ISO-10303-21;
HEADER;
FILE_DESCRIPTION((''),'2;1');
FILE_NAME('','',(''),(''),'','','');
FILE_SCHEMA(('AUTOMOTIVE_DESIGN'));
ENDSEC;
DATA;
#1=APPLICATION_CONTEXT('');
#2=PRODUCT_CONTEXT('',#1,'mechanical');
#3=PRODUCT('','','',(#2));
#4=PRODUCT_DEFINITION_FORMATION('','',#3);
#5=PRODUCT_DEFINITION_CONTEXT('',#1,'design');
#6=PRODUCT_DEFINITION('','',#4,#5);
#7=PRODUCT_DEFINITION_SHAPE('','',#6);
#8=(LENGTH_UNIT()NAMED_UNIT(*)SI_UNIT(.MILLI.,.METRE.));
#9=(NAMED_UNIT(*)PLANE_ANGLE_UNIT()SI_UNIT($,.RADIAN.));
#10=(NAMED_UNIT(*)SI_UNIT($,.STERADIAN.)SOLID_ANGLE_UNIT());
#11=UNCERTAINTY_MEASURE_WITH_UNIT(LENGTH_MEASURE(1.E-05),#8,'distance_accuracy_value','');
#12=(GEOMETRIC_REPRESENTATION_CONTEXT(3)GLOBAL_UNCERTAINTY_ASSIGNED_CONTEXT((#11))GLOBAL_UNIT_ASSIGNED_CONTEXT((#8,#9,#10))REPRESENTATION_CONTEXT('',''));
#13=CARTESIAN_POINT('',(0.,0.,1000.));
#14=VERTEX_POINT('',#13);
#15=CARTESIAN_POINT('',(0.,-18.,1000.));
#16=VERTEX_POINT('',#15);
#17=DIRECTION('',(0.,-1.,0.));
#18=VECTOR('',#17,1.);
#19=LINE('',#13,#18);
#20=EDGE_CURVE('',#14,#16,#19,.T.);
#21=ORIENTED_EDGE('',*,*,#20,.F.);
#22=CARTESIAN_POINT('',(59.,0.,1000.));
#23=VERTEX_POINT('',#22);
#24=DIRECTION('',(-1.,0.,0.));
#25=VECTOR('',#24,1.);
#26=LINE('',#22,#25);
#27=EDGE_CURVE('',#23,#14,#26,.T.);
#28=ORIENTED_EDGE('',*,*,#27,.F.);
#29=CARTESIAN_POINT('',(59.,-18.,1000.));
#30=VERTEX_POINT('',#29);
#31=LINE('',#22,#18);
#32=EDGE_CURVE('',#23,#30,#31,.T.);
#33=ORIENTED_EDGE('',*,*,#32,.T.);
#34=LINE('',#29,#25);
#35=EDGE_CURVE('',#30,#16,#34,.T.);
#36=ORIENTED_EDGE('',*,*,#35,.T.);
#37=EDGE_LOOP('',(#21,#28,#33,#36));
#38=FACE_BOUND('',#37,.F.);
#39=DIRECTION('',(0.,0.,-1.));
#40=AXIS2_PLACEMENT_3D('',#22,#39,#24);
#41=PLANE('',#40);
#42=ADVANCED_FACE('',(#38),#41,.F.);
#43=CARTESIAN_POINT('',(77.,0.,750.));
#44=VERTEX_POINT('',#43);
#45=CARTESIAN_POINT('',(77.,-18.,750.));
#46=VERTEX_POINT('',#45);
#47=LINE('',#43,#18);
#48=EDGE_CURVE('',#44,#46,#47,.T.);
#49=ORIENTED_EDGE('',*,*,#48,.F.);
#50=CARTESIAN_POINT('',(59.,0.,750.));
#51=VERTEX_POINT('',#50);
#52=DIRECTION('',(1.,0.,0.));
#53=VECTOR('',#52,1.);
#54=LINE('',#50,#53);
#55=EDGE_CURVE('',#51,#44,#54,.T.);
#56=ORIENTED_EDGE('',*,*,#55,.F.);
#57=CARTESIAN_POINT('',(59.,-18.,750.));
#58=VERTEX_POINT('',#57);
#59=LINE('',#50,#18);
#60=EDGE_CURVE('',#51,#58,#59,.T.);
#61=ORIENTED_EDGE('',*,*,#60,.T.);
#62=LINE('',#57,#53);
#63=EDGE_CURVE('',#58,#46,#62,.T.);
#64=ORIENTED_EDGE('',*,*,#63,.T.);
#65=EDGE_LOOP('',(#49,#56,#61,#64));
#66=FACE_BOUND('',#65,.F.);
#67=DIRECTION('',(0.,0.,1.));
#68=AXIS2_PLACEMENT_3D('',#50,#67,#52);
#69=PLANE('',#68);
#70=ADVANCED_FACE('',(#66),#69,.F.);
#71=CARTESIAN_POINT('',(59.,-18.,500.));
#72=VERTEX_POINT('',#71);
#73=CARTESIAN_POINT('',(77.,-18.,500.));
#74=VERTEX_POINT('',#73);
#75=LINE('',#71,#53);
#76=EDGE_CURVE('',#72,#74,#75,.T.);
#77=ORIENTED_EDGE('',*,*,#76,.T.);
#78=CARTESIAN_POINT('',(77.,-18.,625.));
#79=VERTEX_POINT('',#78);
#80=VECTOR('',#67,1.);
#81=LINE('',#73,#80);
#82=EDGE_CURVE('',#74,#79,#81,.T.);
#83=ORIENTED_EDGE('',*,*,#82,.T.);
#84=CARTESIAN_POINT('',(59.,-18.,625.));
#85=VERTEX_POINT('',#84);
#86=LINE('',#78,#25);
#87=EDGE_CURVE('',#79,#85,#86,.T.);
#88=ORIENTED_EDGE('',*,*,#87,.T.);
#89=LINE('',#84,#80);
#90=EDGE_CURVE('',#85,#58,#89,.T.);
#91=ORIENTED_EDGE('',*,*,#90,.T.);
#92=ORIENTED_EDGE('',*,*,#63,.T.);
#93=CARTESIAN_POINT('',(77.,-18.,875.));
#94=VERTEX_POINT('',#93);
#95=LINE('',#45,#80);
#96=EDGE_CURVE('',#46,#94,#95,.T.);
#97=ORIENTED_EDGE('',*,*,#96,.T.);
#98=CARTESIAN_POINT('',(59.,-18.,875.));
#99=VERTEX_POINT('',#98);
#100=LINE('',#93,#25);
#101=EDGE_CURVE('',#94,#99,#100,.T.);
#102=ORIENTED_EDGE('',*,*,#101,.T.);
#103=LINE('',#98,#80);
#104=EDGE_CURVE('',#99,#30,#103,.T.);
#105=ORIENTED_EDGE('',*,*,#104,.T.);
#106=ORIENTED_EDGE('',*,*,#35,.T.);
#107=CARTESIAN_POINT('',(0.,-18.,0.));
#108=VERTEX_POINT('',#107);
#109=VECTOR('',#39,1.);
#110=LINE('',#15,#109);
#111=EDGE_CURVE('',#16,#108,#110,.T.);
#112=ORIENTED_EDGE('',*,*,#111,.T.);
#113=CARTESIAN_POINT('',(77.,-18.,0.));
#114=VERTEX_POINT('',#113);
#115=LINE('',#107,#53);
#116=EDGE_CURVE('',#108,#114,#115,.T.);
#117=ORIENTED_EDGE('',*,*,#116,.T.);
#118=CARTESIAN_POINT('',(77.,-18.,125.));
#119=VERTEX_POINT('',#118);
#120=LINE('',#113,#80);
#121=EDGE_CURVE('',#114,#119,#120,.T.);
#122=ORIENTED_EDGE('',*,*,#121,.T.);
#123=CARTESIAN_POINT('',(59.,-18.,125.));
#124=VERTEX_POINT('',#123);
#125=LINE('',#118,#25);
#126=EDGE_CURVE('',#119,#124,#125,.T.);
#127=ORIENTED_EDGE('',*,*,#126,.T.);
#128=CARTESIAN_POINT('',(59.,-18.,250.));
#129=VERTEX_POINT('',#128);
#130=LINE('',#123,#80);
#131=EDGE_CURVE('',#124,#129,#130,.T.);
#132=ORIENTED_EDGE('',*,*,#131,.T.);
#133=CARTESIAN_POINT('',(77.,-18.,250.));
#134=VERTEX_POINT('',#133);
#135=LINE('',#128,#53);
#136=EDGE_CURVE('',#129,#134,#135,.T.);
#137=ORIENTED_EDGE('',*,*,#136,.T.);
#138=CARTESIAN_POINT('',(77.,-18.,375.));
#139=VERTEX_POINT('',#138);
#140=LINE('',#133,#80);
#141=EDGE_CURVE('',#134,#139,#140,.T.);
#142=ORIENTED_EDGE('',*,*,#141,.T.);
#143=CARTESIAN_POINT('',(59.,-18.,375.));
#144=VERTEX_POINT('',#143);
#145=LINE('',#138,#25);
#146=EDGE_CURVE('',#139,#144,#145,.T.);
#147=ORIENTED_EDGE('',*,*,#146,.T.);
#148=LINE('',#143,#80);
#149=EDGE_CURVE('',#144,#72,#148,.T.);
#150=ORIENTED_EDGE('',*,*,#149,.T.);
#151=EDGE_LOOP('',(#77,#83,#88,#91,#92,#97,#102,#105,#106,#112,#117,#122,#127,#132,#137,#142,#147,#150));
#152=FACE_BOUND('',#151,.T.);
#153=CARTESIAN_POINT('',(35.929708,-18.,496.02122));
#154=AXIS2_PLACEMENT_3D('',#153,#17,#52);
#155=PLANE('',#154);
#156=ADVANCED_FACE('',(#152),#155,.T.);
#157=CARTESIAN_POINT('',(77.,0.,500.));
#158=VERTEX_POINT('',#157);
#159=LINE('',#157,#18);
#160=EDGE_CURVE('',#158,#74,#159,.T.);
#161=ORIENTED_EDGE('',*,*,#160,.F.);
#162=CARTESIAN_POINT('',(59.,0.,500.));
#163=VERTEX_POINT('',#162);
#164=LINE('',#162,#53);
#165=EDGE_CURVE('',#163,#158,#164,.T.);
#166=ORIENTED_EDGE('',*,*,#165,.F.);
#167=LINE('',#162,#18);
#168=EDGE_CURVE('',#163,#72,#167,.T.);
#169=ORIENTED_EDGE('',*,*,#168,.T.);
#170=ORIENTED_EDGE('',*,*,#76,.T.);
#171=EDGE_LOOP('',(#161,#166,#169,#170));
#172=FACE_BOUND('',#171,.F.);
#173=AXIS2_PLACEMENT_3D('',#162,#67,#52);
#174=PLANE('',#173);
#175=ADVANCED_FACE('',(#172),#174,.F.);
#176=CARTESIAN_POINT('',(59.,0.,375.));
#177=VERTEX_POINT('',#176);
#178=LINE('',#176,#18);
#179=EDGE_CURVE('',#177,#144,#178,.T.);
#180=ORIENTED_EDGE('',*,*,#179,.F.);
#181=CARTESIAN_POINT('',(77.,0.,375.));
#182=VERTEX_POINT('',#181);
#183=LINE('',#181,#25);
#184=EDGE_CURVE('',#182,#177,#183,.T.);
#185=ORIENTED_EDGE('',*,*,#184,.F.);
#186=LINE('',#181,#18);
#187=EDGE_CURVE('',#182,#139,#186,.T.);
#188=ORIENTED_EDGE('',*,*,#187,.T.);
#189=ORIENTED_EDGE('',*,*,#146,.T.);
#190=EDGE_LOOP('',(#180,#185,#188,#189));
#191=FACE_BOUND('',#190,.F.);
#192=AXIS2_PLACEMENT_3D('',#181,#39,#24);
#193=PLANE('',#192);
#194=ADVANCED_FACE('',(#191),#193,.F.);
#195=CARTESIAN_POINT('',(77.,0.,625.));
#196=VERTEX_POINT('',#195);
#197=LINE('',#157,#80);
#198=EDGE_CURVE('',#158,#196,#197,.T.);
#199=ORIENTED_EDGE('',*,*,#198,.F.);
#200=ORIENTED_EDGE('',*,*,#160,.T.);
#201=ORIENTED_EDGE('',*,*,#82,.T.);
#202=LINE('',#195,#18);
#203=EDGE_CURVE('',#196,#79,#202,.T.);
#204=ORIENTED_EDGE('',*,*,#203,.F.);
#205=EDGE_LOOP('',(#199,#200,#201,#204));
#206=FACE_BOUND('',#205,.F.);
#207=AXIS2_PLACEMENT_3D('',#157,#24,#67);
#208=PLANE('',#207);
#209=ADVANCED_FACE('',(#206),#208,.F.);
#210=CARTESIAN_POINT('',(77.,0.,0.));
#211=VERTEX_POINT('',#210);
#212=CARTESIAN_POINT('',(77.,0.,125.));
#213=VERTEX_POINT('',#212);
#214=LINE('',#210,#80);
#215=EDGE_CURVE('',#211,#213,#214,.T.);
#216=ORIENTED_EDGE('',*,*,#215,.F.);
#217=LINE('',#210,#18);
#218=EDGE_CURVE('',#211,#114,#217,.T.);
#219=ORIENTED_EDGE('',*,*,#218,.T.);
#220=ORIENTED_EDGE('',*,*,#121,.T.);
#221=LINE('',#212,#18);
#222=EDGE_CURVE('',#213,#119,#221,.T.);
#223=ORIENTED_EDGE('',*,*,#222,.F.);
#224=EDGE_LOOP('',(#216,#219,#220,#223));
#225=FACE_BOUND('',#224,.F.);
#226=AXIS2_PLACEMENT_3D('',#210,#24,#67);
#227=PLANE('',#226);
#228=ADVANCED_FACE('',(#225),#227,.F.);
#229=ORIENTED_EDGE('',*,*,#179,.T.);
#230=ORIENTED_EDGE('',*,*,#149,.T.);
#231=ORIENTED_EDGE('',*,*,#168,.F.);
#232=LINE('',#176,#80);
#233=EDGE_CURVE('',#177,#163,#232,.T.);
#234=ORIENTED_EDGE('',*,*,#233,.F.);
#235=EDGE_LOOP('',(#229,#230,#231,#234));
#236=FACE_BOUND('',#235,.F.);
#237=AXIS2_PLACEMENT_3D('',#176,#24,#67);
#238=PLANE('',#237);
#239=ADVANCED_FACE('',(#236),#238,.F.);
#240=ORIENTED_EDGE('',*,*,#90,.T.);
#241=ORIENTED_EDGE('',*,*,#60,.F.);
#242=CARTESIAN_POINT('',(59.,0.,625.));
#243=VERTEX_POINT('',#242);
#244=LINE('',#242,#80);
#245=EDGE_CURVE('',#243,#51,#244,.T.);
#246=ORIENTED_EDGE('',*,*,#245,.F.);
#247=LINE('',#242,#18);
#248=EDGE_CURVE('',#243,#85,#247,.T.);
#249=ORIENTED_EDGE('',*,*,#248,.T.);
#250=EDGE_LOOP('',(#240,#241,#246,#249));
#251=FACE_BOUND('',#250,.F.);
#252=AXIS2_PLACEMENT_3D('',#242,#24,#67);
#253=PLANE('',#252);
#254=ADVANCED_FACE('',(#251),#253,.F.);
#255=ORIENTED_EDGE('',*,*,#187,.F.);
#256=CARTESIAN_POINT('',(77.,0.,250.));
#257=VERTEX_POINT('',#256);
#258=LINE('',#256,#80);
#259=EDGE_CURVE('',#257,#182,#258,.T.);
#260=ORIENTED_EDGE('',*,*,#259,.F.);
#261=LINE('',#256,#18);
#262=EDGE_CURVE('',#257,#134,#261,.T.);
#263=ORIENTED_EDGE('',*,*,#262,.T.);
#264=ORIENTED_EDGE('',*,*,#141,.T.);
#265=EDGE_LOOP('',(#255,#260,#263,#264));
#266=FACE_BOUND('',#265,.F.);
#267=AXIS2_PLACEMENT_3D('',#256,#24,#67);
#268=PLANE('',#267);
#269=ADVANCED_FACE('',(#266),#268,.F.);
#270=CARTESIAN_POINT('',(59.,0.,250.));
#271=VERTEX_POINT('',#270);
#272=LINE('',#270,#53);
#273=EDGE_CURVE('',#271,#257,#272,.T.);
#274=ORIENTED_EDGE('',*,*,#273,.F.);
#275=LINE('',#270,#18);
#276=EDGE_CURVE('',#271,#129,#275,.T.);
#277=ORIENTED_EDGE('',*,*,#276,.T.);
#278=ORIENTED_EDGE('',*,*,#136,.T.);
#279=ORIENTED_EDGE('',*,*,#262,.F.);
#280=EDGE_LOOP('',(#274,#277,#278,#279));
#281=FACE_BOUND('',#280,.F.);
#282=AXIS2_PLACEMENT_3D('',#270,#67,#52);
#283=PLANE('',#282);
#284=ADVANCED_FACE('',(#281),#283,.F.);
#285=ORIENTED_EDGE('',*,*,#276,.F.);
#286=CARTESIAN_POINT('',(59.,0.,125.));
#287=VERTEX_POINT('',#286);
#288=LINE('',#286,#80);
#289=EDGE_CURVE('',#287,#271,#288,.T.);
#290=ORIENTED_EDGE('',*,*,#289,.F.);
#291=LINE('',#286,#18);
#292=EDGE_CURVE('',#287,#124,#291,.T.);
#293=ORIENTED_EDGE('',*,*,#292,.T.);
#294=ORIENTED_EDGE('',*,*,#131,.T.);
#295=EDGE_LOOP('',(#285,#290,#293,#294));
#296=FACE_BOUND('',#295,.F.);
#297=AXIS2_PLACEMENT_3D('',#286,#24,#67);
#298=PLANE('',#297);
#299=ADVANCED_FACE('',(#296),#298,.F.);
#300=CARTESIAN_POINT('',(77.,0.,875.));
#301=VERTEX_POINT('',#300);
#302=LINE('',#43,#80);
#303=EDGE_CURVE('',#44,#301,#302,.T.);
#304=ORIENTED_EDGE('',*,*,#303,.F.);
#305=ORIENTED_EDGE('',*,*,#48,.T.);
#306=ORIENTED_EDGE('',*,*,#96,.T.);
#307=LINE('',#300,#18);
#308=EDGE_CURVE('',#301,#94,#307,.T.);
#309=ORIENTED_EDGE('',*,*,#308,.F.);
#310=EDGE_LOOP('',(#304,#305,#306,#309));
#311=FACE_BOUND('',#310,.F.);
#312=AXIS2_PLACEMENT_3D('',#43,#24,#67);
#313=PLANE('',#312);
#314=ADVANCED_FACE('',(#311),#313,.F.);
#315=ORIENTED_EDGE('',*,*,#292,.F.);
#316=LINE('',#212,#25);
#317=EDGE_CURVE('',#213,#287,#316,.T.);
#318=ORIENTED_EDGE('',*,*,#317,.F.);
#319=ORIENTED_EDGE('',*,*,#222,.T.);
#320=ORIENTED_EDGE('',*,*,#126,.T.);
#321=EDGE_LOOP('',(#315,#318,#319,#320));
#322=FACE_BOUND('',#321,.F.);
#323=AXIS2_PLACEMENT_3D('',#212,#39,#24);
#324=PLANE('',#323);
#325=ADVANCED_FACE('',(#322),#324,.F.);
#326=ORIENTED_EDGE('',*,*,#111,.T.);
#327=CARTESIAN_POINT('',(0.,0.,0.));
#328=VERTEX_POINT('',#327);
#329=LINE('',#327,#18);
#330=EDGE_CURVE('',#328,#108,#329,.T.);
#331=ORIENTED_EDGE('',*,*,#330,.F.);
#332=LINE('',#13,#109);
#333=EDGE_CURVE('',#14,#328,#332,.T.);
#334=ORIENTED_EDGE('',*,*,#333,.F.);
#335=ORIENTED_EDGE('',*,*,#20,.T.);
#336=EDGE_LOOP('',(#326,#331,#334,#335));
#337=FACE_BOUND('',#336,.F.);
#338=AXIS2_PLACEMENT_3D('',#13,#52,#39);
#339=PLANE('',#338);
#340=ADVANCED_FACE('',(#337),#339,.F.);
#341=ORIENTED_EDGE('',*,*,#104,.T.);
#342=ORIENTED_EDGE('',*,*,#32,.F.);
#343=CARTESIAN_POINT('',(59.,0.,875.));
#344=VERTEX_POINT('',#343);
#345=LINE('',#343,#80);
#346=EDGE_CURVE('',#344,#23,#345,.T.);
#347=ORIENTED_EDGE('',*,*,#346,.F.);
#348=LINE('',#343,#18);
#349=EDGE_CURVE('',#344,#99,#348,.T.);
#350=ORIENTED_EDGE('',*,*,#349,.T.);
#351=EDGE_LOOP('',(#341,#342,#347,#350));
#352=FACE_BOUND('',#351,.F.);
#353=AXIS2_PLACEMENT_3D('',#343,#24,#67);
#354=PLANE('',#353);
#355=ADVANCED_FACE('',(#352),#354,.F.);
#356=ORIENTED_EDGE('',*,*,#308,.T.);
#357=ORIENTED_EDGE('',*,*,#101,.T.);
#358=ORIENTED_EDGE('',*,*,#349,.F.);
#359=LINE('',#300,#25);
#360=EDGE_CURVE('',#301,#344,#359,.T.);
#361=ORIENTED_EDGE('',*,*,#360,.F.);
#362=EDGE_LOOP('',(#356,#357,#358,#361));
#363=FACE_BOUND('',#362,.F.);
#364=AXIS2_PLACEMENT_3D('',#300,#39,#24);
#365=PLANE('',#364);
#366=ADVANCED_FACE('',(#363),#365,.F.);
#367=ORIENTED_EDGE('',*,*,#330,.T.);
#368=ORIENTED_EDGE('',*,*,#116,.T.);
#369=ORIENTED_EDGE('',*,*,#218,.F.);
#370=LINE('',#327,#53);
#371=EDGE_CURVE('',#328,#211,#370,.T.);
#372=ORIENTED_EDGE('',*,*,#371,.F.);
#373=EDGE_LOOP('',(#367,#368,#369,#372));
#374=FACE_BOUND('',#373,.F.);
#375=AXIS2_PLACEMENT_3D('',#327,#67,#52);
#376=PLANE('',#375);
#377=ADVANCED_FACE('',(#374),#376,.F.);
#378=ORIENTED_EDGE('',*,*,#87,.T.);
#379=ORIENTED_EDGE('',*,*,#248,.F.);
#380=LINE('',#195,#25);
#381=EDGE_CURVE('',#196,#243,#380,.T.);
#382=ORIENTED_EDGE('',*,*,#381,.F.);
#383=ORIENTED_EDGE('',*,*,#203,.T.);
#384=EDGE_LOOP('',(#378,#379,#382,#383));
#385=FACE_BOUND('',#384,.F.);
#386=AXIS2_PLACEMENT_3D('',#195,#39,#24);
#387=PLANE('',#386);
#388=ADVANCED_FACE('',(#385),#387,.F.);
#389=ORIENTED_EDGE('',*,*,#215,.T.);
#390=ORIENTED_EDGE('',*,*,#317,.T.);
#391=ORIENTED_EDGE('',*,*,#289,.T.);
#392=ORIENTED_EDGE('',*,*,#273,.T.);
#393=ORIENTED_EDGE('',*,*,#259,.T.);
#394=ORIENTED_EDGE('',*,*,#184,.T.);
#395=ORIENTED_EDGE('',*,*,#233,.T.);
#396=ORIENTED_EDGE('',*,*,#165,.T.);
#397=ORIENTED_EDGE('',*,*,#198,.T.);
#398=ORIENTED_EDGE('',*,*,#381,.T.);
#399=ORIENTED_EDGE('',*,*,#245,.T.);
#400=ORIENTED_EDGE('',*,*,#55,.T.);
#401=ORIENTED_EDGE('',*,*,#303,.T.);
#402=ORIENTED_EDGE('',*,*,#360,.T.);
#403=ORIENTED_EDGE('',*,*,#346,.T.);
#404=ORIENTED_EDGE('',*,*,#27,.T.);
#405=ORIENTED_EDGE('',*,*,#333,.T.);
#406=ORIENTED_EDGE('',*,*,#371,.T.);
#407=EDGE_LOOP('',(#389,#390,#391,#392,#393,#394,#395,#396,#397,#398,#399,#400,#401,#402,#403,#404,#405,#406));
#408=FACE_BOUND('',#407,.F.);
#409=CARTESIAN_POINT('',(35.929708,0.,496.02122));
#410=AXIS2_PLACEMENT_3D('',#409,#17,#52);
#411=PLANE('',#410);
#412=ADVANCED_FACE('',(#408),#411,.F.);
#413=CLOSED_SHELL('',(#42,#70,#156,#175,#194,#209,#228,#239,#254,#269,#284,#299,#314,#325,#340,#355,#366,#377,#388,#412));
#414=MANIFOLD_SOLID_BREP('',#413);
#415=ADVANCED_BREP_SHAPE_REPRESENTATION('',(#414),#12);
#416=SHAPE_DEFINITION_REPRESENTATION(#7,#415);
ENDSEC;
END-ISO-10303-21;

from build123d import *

# Parameters (mm, degrees)
F1_DEPTH = 18


# Not quite as in the source:
# - a feature names something its author has since deleted; it is built from what else it names


with BuildPart() as f1:
    # F0 (on Front) → F1 (new body)
    with BuildSketch(Plane.XZ):
        Polygon((0, 1000), (0, 0), (77, 0), (77, 125), (59, 125), (59, 250), (77, 250), (77, 375), (59, 375), (59, 500), (77, 500), (77, 625), (59, 625), (59, 750), (77, 750), (77, 875), (59, 875), (59, 1000), align=None)
    extrude(amount=F1_DEPTH)


solid = f1.part
